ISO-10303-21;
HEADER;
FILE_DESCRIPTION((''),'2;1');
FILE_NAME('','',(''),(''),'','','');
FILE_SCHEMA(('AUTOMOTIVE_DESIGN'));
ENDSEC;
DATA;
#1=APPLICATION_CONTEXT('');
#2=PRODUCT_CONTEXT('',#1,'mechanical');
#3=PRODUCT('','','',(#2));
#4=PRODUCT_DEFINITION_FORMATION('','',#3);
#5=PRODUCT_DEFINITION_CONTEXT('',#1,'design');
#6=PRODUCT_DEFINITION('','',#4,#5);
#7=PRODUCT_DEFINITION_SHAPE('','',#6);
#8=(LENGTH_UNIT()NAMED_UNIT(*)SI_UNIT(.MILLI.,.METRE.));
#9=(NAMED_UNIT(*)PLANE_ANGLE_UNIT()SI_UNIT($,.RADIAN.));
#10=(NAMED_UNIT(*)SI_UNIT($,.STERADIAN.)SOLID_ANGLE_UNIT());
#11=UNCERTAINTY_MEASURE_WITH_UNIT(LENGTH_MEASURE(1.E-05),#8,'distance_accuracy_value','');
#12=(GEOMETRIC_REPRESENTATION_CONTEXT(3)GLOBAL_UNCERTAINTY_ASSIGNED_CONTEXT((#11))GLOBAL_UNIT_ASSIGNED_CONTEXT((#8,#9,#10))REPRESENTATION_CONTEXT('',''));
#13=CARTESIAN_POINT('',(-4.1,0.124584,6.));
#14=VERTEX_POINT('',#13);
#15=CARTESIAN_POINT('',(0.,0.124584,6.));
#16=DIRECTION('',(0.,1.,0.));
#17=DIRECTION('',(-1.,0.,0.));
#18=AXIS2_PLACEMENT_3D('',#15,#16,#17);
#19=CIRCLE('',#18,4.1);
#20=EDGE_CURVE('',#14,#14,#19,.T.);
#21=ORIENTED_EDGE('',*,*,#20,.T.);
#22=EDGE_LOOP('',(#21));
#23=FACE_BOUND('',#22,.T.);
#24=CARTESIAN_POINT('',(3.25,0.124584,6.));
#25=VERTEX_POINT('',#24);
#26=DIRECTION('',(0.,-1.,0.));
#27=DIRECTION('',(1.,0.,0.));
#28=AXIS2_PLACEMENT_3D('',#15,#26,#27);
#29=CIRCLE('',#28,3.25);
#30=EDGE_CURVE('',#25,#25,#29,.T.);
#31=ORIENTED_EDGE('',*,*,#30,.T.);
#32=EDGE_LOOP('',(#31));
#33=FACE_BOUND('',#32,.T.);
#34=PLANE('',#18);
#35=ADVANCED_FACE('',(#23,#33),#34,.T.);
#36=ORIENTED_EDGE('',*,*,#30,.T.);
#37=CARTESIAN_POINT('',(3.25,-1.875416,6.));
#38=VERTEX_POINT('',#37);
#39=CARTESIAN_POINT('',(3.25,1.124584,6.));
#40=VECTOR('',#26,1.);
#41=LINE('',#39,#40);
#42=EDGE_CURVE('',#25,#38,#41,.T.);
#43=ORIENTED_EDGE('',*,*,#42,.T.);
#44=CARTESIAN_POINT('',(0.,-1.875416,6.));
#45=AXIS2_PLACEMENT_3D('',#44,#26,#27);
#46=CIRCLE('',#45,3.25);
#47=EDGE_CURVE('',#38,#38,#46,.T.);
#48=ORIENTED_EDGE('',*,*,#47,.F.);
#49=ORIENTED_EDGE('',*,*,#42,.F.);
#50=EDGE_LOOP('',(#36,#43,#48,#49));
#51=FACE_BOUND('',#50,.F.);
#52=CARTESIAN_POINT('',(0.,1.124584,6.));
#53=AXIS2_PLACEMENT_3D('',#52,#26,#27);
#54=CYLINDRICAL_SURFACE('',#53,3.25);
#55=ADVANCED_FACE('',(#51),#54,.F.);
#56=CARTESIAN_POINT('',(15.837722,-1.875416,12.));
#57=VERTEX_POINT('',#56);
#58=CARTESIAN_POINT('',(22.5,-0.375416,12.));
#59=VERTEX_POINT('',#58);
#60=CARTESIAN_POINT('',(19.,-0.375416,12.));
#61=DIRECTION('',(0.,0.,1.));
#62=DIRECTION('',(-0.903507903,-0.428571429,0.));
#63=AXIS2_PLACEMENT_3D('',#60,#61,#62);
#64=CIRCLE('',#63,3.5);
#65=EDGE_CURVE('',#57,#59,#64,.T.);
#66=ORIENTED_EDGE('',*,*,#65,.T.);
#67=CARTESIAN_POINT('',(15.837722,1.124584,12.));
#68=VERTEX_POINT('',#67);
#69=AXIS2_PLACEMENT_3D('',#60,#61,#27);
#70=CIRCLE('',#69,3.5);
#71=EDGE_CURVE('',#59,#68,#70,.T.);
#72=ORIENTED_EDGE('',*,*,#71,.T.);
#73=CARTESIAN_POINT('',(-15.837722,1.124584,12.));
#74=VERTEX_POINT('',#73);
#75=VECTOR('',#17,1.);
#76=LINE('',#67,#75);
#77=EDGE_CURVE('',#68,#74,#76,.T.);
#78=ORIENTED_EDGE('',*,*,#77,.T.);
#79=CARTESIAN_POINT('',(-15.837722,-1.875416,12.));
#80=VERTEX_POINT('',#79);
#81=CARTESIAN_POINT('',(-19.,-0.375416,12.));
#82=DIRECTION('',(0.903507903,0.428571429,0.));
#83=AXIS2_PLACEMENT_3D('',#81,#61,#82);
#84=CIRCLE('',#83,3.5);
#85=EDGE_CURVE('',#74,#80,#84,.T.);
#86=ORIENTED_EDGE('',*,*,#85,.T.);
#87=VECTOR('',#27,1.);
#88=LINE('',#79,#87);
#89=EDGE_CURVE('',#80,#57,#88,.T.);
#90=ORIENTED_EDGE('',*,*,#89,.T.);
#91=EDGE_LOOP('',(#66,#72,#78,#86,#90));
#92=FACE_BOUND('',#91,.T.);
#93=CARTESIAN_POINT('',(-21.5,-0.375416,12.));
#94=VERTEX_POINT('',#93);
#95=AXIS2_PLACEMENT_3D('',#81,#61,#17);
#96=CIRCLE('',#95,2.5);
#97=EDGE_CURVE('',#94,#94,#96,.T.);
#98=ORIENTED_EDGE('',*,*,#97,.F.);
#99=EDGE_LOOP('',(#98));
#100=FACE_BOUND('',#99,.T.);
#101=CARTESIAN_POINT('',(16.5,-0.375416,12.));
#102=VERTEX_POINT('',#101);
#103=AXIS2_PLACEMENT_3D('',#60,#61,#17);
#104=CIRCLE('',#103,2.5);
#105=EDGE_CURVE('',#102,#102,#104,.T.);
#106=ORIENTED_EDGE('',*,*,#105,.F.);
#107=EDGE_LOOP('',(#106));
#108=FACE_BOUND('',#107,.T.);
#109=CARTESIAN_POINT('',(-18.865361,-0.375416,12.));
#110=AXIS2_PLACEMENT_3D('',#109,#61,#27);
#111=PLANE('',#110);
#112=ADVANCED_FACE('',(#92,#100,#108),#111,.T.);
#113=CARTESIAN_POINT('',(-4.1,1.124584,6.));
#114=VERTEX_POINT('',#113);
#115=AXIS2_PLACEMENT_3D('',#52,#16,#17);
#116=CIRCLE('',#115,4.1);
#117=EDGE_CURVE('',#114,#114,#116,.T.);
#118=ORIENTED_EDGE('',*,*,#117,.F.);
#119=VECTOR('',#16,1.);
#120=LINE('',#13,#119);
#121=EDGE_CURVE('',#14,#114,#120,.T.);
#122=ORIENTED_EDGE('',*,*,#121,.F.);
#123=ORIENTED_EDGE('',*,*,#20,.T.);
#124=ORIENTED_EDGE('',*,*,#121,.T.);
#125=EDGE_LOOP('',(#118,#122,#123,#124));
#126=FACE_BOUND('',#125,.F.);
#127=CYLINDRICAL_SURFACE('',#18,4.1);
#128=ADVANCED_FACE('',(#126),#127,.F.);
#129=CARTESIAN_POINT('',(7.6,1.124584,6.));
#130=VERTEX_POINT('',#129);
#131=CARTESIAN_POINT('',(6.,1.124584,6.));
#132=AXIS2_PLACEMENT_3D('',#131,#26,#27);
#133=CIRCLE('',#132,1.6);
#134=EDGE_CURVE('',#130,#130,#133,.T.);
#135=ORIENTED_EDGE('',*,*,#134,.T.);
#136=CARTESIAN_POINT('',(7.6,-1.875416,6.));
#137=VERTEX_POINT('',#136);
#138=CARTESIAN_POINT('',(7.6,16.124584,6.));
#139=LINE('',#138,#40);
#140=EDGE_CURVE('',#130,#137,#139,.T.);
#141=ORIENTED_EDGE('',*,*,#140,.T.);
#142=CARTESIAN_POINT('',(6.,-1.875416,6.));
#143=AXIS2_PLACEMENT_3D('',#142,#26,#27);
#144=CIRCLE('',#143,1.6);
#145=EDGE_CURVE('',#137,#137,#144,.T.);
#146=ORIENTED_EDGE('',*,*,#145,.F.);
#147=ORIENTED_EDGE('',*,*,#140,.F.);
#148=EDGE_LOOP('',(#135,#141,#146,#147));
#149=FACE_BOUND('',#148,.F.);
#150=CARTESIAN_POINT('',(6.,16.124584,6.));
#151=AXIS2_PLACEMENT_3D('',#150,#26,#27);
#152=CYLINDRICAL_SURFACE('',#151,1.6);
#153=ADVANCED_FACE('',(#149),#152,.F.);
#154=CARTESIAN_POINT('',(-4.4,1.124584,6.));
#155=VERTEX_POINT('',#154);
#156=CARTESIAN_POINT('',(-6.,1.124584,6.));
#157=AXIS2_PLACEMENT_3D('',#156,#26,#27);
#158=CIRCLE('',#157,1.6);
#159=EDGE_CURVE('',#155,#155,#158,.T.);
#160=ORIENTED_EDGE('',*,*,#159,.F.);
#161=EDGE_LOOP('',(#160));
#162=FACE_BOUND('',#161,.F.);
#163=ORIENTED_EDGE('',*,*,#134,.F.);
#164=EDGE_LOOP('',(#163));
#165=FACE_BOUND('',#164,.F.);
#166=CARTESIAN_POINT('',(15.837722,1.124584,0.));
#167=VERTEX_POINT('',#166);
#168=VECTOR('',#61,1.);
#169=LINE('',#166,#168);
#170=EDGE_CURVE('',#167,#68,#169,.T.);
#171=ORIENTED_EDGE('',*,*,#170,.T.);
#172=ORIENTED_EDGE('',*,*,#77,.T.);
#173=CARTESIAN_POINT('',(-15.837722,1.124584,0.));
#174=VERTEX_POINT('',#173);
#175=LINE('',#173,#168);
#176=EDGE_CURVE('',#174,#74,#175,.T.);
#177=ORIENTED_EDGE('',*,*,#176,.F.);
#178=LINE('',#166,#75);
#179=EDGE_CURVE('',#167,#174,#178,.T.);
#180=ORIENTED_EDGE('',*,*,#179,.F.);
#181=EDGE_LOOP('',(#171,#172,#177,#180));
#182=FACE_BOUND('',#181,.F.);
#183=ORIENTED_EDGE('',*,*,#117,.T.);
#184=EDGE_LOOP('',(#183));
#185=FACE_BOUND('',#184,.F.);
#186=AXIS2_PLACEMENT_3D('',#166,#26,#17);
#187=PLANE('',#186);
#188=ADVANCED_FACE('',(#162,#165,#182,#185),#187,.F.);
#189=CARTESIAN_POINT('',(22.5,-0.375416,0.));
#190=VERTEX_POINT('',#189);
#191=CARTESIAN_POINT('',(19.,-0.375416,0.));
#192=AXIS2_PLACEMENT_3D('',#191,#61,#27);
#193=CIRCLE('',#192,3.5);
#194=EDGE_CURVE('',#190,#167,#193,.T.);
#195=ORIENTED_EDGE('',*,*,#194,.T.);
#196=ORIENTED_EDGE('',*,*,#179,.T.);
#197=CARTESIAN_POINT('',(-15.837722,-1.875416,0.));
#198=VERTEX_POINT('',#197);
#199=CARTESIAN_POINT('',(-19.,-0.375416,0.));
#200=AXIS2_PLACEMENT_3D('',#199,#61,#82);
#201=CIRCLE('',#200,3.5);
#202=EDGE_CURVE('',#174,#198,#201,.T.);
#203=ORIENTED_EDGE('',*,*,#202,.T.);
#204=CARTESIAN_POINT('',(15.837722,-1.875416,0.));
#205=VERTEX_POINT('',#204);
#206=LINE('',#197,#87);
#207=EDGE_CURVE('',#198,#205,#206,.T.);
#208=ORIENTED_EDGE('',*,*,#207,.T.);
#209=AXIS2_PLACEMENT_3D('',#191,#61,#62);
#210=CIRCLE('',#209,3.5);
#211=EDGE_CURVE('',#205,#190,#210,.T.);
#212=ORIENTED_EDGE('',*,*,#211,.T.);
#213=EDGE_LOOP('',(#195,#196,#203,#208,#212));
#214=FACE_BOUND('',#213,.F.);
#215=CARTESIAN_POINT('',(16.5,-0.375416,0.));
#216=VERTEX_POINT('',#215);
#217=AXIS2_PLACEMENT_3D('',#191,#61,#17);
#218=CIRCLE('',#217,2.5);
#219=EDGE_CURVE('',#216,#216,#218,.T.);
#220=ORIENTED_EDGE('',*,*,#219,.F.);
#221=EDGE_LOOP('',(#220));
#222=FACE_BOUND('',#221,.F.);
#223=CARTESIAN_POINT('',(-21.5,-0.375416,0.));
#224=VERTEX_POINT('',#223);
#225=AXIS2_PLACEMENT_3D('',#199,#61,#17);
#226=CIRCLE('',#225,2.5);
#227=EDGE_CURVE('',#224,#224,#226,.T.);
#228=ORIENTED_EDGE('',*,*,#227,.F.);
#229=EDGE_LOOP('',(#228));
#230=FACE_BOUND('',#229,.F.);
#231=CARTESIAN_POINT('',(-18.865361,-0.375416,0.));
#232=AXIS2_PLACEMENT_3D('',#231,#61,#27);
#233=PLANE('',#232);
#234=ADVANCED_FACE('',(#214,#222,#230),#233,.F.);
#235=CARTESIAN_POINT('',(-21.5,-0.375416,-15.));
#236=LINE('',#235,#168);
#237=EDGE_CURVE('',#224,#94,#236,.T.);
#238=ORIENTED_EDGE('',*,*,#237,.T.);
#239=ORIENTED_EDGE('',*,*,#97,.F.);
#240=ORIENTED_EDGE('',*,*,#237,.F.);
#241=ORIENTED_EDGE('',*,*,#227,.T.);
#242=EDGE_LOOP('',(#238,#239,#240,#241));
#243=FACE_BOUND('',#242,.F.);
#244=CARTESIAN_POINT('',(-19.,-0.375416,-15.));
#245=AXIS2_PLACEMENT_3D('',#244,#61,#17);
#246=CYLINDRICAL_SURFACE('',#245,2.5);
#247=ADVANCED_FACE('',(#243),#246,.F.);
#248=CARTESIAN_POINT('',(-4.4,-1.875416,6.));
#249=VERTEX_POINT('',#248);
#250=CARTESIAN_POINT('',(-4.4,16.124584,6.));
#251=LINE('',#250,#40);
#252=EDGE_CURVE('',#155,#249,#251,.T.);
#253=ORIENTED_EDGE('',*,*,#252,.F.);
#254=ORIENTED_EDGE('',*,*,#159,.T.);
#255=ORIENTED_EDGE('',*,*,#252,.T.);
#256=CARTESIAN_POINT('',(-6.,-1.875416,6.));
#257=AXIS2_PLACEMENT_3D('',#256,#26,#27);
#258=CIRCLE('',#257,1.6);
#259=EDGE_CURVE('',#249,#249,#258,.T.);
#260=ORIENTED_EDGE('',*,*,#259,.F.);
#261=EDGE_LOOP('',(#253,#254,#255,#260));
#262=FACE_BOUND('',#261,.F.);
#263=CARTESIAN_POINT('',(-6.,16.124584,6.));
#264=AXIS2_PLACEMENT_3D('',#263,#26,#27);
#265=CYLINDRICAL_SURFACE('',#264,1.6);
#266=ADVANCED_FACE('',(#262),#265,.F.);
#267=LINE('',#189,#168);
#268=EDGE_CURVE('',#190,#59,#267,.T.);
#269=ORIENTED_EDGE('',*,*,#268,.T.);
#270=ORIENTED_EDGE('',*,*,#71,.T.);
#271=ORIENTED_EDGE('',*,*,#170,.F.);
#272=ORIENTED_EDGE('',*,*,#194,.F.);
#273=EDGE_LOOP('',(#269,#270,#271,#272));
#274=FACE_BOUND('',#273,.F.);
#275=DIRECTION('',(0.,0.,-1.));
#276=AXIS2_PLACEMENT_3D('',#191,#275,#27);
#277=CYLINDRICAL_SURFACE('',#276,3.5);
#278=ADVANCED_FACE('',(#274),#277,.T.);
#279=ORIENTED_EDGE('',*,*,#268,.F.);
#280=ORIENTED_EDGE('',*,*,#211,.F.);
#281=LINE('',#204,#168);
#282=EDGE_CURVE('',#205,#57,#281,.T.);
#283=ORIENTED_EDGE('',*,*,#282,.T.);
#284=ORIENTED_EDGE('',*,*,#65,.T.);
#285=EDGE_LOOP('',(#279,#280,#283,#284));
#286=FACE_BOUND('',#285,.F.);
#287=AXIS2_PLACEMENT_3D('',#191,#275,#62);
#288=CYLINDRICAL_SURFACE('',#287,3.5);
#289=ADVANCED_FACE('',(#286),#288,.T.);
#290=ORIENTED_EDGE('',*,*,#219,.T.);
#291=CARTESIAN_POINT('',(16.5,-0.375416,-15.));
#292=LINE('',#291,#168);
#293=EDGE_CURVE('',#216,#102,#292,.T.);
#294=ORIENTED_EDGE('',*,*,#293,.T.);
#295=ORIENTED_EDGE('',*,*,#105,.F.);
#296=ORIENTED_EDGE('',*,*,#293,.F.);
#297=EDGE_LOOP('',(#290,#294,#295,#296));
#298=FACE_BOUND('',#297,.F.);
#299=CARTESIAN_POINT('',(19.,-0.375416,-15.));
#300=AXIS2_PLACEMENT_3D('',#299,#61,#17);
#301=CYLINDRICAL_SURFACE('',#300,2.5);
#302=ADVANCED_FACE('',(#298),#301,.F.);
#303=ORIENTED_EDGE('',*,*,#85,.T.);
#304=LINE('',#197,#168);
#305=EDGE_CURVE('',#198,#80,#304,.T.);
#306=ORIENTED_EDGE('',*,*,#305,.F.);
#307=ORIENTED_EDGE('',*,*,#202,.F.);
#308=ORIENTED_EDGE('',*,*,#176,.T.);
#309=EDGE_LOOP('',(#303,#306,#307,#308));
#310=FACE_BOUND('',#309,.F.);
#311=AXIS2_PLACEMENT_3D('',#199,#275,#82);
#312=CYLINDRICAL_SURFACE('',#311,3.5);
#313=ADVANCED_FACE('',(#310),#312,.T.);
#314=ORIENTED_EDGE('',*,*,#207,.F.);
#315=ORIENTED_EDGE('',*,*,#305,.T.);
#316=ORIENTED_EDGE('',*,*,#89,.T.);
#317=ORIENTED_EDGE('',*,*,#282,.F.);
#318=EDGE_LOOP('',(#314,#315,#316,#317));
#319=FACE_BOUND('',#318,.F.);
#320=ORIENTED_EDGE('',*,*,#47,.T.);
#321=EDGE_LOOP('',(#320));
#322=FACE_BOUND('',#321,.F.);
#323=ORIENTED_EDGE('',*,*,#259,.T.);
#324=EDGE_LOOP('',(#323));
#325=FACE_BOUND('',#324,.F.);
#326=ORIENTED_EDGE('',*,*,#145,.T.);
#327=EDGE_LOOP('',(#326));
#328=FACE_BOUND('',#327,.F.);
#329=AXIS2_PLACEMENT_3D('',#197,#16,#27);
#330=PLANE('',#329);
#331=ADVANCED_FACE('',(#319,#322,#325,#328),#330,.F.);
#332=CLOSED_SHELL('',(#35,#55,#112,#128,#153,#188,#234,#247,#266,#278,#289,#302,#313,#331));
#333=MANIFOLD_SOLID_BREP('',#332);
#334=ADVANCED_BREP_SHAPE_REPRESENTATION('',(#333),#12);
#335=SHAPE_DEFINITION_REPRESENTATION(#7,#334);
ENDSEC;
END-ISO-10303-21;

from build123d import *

# Parameters (mm, degrees)
F1_DEPTH       = 12
F2_D           = 5
F2_DEPTH       = 15
F2_TIP         = 1.5021515476
F3_D           = 5
F3_DEPTH       = 15
F3_TIP         = 1.5021515476
F5_D           = 6.5
F5_DEPTH       = 10
F5_CBORE_D     = 8.2
F5_CBORE_DEPTH = 1
F5_TIP         = 1.9527970118
F6_D           = 3.2
F6_DEPTH       = 15
F6_TIP         = 0.9613769904
F7_D           = 3.2
F7_DEPTH       = 15
F7_TIP         = 0.9613769904


# Not quite as in the source:
# - a feature names something its author has since deleted; it is built from what else it names


with BuildPart() as f1:
    # F0 (on Top) → F1 (new body)
    with BuildSketch(Plane.XY):
        with BuildLine():
            Line((-19, -1.8754155822), (-19, 1.1245844178))
            Line((-19, 1.1245844178), (-15.8377223398, 1.1245844178))
            ThreePointArc((-15.8377223398, 1.1245844178), (-22.5, -0.3754155822), (-15.8377223398, -1.8754155822))
            Line((-15.8377223398, -1.8754155822), (-19, -1.8754155822))
        make_face()
        with BuildLine():
            Line((-15.8377223398, 1.1245844178), (-19, 1.1245844178))
            Line((-19, 1.1245844178), (-19, -1.8754155822))
            Line((-19, -1.8754155822), (-15.8377223398, -1.8754155822))
            ThreePointArc((-15.8377223398, -1.8754155822), (-15.5854742781, -1.144189993), (-15.5, -0.3754155822))
            ThreePointArc((-15.5, -0.3754155822), (-15.5854742781, 0.3933588286), (-15.8377223398, 1.1245844178))
        make_face()
        with BuildLine():
            Line((15.8377223398, 1.1245844178), (-15.8377223398, 1.1245844178))
            ThreePointArc((-15.8377223398, 1.1245844178), (-15.5854742781, 0.3933588286), (-15.5, -0.3754155822))
            ThreePointArc((-15.5, -0.3754155822), (-15.5854742781, -1.144189993), (-15.8377223398, -1.8754155822))
            Line((-15.8377223398, -1.8754155822), (15.8377223398, -1.8754155822))
            ThreePointArc((15.8377223398, -1.8754155822), (15.5, -0.3754155822), (15.8377223398, 1.1245844178))
        make_face()
        with BuildLine():
            ThreePointArc((22.5, -0.3754155822), (19.7687744108, 3.0391101397), (15.8377223398, 1.1245844178))
            Line((15.8377223398, 1.1245844178), (19, 1.1245844178))
            Line((19, 1.1245844178), (19, -1.8754155822))
            Line((19, -1.8754155822), (15.8377223398, -1.8754155822))
            ThreePointArc((15.8377223398, -1.8754155822), (19.7687744108, -3.7899413041), (22.5, -0.3754155822))
        make_face()
        with BuildLine():
            Line((19, 1.1245844178), (15.8377223398, 1.1245844178))
            ThreePointArc((15.8377223398, 1.1245844178), (15.5, -0.3754155822), (15.8377223398, -1.8754155822))
            Line((15.8377223398, -1.8754155822), (19, -1.8754155822))
            Line((19, -1.8754155822), (19, 1.1245844178))
        make_face()
    extrude(amount=F1_DEPTH)

    # F2
    with Locations(Plane(origin=(0, 0, 0), x_dir=(1, 0, 0), z_dir=(0, 0, -1))):
        with Locations((19, 0.3754155822)):
            Hole(F2_D / 2, depth=F2_DEPTH)
            with Locations((0, 0, -(F2_DEPTH + F2_TIP / 2))):  # 118° drill point
                Cone(0, F2_D / 2, F2_TIP, mode=Mode.SUBTRACT)

    # F3
    with Locations(Plane(origin=(0, 0, 0), x_dir=(1, 0, 0), z_dir=(0, 0, -1))):
        with Locations((-19, 0.3754155822)):
            Hole(F3_D / 2, depth=F3_DEPTH)
            with Locations((0, 0, -(F3_DEPTH + F3_TIP / 2))):  # 118° drill point
                Cone(0, F3_D / 2, F3_TIP, mode=Mode.SUBTRACT)

    # F5
    with Locations(Plane(origin=(0, 1.1245844178, 0), x_dir=(-1, 0, 0), z_dir=(0, 1, 0))):
        with Locations((0, 6)):
            CounterBoreHole(F5_D / 2, F5_CBORE_D / 2, F5_CBORE_DEPTH, depth=F5_DEPTH)
            with Locations((0, 0, -(F5_DEPTH + F5_TIP / 2))):  # 118° drill point
                Cone(0, F5_D / 2, F5_TIP, mode=Mode.SUBTRACT)

    # F6
    with Locations(Plane(origin=(0, 1.1245844178, 0), x_dir=(-1, 0, 0), z_dir=(0, 1, 0))):
        with Locations((-6, 6)):
            Hole(F6_D / 2, depth=F6_DEPTH)
            with Locations((0, 0, -(F6_DEPTH + F6_TIP / 2))):  # 118° drill point
                Cone(0, F6_D / 2, F6_TIP, mode=Mode.SUBTRACT)

    # F7
    with Locations(Plane(origin=(0, 1.1245844178, 0), x_dir=(-1, 0, 0), z_dir=(0, 1, 0))):
        with Locations((6, 6)):
            Hole(F7_D / 2, depth=F7_DEPTH)
            with Locations((0, 0, -(F7_DEPTH + F7_TIP / 2))):  # 118° drill point
                Cone(0, F7_D / 2, F7_TIP, mode=Mode.SUBTRACT)


solid = f1.part
